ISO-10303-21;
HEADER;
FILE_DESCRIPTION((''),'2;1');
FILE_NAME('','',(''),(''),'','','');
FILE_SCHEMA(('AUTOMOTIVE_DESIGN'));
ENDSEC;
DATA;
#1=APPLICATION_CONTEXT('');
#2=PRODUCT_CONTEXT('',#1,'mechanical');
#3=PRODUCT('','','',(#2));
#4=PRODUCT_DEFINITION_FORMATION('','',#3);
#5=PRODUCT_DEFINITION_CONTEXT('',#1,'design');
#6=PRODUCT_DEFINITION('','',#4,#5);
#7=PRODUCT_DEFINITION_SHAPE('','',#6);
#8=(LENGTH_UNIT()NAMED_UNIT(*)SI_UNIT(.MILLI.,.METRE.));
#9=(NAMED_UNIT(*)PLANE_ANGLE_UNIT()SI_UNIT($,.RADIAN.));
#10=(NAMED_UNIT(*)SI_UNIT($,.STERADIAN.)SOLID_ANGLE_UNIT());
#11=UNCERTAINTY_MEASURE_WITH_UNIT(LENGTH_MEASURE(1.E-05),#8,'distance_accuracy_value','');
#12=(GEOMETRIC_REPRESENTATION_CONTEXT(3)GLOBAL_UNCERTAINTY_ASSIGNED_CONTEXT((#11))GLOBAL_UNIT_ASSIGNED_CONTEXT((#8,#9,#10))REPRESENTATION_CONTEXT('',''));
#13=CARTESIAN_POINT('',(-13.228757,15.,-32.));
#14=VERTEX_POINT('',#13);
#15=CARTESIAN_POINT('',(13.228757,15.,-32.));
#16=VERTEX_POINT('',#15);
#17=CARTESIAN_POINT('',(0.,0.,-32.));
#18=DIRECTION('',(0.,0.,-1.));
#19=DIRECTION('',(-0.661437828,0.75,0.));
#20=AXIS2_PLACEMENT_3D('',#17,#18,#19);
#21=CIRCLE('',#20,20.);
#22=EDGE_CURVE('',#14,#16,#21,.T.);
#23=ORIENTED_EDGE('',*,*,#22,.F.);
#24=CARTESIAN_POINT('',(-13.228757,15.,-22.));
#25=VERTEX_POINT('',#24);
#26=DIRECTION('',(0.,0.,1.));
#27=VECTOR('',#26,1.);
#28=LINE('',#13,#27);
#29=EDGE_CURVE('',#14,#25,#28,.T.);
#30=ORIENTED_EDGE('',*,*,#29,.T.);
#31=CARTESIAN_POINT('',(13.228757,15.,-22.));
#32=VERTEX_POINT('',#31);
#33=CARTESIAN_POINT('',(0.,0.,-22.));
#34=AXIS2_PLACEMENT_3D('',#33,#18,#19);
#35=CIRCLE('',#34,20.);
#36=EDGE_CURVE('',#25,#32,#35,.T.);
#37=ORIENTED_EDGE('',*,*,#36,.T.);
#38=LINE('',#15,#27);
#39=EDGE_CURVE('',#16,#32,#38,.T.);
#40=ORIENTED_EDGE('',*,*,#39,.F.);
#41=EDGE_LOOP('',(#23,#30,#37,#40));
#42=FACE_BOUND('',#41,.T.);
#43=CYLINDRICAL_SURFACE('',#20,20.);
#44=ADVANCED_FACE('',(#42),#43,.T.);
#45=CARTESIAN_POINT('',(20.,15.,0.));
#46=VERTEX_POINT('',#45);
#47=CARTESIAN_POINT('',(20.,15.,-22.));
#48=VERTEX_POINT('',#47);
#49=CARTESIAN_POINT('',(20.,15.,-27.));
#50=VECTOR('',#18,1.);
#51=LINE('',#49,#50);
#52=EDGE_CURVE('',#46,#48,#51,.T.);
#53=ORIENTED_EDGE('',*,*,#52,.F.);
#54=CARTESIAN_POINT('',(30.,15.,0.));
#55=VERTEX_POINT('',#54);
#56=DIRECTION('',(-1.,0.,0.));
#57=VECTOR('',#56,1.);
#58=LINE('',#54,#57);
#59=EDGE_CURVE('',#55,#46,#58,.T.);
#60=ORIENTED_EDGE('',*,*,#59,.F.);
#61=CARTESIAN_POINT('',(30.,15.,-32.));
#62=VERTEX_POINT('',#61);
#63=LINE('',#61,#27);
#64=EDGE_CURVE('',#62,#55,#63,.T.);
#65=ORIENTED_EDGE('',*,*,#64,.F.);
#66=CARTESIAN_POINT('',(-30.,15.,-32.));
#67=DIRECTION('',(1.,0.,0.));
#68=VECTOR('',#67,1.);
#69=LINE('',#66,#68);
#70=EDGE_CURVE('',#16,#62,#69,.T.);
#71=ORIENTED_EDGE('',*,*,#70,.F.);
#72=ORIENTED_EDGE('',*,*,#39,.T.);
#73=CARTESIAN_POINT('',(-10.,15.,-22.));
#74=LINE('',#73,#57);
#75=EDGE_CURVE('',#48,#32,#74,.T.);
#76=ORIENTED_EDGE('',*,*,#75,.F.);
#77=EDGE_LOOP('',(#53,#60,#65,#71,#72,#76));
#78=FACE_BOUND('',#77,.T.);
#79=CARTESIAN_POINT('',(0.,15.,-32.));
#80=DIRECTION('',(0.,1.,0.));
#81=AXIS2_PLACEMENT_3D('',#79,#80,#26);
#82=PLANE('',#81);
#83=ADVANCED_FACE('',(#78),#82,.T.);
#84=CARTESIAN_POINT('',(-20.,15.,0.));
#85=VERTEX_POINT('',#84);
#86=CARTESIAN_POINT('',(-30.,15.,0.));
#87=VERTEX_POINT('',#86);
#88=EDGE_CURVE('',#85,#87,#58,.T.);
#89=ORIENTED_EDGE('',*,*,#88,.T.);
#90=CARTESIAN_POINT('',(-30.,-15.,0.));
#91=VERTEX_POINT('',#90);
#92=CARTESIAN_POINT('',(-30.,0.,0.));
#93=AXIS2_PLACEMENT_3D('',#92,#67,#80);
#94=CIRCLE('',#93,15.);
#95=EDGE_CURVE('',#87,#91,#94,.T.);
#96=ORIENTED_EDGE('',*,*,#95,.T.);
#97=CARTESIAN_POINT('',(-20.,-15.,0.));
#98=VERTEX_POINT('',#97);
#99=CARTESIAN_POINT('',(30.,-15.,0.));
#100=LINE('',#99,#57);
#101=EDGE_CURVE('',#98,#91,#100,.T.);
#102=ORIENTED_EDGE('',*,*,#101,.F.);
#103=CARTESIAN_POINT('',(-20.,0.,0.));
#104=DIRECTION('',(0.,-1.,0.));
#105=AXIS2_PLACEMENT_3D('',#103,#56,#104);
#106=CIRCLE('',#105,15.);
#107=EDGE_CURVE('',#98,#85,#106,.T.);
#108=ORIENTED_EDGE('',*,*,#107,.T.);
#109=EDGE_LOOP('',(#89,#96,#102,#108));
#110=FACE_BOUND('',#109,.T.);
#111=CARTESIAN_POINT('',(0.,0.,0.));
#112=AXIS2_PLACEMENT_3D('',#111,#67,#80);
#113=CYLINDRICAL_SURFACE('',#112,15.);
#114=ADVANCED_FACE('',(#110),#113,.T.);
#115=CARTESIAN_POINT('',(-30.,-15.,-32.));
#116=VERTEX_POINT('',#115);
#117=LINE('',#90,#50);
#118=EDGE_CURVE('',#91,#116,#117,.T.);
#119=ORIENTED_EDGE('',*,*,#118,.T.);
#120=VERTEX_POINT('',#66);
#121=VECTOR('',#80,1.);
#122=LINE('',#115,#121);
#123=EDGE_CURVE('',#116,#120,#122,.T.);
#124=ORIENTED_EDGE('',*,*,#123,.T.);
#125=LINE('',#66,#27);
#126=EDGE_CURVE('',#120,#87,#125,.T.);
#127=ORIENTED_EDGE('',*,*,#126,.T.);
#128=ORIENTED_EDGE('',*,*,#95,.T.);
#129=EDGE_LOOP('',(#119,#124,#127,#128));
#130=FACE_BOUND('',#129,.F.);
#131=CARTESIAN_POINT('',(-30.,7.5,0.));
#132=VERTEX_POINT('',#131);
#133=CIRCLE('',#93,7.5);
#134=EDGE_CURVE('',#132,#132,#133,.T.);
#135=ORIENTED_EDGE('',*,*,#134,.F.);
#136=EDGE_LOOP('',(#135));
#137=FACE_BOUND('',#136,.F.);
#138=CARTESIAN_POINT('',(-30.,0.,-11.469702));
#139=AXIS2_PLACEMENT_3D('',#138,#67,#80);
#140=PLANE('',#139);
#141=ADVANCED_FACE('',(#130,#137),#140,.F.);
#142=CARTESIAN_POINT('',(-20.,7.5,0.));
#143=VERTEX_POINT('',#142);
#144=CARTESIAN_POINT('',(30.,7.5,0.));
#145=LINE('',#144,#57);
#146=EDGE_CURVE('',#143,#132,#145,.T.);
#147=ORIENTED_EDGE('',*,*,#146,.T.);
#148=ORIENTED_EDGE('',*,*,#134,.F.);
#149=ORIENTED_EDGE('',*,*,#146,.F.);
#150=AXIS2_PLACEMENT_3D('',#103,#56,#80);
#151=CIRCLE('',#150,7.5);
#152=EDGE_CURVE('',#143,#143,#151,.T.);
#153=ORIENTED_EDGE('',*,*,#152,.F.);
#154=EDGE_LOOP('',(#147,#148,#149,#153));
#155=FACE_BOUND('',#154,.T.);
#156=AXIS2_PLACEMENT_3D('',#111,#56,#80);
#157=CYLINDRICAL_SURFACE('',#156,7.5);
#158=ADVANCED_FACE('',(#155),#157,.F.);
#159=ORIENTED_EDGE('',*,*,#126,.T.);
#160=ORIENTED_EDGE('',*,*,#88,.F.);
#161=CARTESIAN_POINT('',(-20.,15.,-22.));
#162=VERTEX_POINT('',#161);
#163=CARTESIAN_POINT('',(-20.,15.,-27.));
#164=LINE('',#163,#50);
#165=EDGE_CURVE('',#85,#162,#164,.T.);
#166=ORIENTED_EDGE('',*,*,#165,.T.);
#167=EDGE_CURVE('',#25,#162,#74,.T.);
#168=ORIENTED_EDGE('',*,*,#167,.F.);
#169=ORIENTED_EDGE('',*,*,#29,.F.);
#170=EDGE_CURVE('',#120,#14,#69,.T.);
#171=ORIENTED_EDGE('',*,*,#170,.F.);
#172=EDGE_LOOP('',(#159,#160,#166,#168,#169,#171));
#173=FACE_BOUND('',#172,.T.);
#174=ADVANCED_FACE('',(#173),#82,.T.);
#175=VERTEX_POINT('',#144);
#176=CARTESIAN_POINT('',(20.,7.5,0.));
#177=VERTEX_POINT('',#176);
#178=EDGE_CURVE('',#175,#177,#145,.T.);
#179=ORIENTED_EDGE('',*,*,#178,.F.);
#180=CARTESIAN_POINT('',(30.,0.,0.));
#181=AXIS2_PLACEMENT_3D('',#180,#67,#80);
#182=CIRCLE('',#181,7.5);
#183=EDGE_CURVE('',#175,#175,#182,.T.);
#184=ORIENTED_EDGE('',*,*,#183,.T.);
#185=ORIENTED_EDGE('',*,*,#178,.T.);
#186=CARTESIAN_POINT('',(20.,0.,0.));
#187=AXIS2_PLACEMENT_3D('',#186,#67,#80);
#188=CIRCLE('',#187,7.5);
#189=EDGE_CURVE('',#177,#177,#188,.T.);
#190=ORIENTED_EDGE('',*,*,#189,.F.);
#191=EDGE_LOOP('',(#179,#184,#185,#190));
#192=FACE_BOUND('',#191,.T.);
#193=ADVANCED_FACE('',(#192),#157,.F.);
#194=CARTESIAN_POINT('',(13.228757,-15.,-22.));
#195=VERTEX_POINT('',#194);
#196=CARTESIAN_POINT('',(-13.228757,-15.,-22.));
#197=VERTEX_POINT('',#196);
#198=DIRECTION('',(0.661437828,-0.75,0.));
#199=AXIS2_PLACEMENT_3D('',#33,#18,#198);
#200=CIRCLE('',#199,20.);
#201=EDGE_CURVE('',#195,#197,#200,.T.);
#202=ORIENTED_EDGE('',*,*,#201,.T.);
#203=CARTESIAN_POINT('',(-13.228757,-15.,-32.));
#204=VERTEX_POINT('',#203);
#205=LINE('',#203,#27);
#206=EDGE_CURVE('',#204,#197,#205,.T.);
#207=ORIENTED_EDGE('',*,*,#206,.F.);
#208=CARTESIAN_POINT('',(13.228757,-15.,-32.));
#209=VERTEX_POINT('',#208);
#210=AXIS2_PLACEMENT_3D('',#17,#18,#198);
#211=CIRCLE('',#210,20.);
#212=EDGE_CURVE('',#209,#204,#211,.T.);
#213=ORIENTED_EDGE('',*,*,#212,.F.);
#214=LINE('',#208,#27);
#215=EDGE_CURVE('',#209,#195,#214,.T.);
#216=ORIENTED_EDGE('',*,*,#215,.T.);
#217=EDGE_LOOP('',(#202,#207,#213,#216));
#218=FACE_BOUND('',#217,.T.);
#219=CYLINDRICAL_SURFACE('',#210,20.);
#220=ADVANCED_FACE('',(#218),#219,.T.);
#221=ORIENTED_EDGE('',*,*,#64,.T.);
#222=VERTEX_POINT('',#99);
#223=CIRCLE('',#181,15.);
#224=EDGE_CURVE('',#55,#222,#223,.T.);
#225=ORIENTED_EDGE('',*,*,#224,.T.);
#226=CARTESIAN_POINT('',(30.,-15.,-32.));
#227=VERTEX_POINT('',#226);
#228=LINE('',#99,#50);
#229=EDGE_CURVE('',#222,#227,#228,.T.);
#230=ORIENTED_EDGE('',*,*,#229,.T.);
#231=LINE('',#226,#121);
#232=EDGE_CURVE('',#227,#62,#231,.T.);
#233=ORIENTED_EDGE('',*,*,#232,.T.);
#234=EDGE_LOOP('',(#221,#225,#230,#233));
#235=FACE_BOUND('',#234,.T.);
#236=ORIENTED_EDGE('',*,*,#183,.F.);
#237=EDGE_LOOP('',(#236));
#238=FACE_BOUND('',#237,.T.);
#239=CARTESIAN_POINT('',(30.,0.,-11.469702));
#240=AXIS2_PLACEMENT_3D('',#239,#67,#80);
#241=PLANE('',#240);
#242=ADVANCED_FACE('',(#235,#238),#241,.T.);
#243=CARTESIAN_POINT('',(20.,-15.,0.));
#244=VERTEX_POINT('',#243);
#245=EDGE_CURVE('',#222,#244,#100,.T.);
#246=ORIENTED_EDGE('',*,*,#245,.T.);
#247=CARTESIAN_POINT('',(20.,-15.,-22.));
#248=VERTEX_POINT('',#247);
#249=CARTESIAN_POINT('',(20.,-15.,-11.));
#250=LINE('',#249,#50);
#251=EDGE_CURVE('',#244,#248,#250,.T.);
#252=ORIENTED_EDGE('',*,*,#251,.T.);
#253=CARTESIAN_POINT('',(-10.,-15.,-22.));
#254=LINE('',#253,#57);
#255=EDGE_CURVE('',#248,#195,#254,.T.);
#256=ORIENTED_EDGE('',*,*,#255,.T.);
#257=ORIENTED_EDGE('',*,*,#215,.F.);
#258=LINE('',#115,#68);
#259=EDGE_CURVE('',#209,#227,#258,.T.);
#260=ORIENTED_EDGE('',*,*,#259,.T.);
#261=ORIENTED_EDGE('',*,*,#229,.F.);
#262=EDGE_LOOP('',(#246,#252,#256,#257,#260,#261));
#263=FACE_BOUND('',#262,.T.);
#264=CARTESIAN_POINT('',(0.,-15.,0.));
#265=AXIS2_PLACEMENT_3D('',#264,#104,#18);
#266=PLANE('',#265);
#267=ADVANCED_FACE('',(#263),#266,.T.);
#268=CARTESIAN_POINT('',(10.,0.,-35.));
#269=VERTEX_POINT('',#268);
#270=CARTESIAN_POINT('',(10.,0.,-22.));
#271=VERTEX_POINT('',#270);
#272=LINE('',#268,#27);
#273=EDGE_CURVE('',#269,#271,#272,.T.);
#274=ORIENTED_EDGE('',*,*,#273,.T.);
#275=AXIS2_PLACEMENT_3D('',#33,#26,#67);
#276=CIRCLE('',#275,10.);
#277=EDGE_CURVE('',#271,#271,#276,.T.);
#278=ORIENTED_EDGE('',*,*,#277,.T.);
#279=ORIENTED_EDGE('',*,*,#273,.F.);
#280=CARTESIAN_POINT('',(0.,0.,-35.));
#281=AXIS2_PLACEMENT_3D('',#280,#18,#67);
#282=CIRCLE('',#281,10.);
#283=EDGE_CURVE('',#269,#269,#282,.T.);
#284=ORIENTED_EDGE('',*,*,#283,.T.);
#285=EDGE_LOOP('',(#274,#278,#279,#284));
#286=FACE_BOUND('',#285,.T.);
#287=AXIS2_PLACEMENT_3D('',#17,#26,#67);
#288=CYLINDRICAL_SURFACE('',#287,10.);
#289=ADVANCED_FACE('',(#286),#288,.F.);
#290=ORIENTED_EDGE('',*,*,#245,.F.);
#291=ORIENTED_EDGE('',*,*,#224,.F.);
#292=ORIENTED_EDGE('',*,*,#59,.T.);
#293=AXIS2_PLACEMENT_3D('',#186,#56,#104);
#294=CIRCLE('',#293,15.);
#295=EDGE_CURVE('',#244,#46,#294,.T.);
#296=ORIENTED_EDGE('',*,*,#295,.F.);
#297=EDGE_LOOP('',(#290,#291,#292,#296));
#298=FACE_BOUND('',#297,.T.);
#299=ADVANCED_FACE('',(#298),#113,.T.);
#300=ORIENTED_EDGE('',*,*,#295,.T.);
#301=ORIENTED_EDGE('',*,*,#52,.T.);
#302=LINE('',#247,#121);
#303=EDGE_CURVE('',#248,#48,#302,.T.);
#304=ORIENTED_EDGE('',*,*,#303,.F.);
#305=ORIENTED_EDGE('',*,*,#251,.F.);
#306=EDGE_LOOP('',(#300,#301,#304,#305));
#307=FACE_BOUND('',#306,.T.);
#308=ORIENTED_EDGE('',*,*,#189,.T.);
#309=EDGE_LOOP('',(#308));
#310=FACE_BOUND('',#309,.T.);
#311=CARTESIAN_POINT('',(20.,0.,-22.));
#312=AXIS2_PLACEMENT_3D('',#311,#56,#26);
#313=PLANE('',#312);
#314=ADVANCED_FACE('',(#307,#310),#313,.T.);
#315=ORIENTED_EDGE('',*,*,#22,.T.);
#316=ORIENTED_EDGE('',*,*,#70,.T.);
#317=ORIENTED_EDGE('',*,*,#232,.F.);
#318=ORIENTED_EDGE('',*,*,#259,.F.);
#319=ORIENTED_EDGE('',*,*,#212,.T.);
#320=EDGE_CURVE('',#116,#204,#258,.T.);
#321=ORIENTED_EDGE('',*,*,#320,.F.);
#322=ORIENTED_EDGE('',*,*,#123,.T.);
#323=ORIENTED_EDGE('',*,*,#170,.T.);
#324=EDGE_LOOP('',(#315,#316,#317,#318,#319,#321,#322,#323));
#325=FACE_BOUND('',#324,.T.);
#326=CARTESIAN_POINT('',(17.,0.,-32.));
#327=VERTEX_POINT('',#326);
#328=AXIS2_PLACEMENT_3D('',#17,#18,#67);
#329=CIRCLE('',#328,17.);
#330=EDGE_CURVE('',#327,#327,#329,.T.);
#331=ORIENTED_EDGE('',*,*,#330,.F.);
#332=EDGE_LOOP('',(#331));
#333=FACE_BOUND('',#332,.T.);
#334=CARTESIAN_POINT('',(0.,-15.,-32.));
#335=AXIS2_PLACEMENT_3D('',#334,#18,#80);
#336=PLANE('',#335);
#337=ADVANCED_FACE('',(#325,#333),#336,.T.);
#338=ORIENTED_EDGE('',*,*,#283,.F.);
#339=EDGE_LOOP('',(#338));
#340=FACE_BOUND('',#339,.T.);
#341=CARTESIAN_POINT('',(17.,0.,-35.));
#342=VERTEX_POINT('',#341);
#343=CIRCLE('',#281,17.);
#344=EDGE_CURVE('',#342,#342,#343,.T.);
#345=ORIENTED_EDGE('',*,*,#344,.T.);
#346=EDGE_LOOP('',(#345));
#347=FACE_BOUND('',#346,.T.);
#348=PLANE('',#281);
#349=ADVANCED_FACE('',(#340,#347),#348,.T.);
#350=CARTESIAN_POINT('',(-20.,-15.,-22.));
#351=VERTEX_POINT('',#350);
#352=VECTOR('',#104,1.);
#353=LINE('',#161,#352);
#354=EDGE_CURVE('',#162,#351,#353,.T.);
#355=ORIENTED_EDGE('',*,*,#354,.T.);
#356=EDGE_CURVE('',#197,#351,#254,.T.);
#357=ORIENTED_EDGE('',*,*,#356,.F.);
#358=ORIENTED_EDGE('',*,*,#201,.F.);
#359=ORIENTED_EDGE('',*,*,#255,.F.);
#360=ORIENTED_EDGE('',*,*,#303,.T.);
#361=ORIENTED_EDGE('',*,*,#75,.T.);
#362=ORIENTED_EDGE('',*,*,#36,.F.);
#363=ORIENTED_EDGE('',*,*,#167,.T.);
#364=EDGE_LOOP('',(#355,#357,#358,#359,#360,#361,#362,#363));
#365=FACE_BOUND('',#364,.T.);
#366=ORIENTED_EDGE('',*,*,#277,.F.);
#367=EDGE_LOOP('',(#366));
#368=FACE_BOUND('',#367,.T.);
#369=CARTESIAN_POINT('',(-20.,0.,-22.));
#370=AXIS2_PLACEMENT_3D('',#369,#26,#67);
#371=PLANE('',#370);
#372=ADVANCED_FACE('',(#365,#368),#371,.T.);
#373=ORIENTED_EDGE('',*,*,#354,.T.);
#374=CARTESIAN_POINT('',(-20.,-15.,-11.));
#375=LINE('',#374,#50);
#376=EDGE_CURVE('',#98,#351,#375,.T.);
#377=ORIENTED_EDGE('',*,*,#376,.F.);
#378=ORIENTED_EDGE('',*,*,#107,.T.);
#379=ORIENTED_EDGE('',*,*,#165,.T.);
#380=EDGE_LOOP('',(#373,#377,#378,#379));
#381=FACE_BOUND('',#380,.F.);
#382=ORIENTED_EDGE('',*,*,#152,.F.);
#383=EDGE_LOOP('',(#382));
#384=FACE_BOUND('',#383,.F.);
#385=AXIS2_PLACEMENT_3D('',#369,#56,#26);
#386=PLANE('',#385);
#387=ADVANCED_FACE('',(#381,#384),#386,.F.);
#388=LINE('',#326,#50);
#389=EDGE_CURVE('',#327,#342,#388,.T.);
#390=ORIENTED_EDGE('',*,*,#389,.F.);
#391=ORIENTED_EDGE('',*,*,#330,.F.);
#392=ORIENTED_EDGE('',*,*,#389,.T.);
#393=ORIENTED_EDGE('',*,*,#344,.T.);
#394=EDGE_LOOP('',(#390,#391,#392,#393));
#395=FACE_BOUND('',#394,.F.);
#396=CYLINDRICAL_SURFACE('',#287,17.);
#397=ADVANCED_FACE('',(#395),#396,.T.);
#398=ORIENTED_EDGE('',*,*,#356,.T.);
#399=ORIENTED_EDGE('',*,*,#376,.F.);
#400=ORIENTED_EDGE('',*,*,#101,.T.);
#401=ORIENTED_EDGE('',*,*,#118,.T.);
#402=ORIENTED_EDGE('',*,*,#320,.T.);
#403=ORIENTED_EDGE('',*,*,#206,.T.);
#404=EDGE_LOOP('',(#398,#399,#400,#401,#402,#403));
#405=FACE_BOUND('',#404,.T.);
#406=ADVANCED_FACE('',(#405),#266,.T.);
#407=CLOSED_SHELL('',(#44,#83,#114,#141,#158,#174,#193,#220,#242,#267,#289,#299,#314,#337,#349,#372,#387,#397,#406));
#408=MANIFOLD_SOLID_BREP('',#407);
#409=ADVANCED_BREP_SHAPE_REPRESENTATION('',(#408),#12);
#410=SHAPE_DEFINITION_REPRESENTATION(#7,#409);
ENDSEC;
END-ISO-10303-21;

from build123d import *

# Parameters (mm, degrees)
F0_R          = 7.5
F1_DEPTH      = 30
F2_W          = 40
F2_H          = 48.8621479026
F3_DEPTH      = 15.001
F3_DEPTH_BACK = 15.001
F4_R          = 10
F5_DEPTH      = 32.001
F6_R          = 10
F7_DEPTH      = 10
F8_R          = 17
F8_R_2        = 10
F9_DEPTH      = 3


with BuildPart() as f1:
    # F0 (on Right) → F1 (new body, symmetric)
    with BuildSketch(Plane.YZ):
        with BuildLine():
            Line((-15, 0), (-15, -32))
            Line((-15, -32), (15, -32))
            Line((15, -32), (15, 0))
            ThreePointArc((15, 0), (0, 15), (-15, 0))
        make_face()
        Circle(F0_R, mode=Mode.SUBTRACT)
    extrude(amount=F1_DEPTH, both=True)

    # F2 (on Front) → F3 (cut, two sides)
    with BuildSketch(Plane.XZ) as f3_sk:
        with Locations((0, 2.4310739513)):
            Rectangle(F2_W, F2_H)
    extrude(amount=-F3_DEPTH, mode=Mode.SUBTRACT)
    extrude(f3_sk.sketch, amount=F3_DEPTH_BACK, mode=Mode.SUBTRACT)

    # F4 (on Top) → F5 (cut, through all)
    with BuildSketch(Plane.XY):
        Circle(F4_R)
    extrude(amount=-F5_DEPTH, mode=Mode.SUBTRACT)

    # F6 (on face) → F7 (join)
    with BuildSketch(Plane(origin=(0, 0, -32), x_dir=(1, 0, 0), z_dir=(0, 0, -1))):
        with BuildLine():
            ThreePointArc((13.2287565553, -15), (18.2287565553, -8.2287565553), (20, 0))
            ThreePointArc((20, 0), (18.2287565553, 8.2287565553), (13.2287565553, 15))
            Line((13.2287565553, 15), (-13.2287565553, 15))
            ThreePointArc((-13.2287565553, 15), (-20, 0), (-13.2287565553, -15))
            Line((-13.2287565553, -15), (13.2287565553, -15))
        make_face()
        Circle(F6_R, mode=Mode.SUBTRACT)
        with BuildLine():
            Line((-13.2287565553, 15), (13.2287565553, 15))
            ThreePointArc((13.2287565553, 15), (0, 20), (-13.2287565553, 15))
        make_face()
        with BuildLine():
            ThreePointArc((-13.2287565553, -15), (0, -20), (13.2287565553, -15))
            Line((13.2287565553, -15), (-13.2287565553, -15))
        make_face()
    extrude(amount=-F7_DEPTH)

    # F8 (on face) → F9 (join)
    with BuildSketch(Plane(origin=(0, 0, -32), x_dir=(1, 0, 0), z_dir=(0, 0, -1))):
        Circle(F8_R)
        Circle(F8_R_2, mode=Mode.SUBTRACT)
    extrude(amount=F9_DEPTH)


solid = f1.part
